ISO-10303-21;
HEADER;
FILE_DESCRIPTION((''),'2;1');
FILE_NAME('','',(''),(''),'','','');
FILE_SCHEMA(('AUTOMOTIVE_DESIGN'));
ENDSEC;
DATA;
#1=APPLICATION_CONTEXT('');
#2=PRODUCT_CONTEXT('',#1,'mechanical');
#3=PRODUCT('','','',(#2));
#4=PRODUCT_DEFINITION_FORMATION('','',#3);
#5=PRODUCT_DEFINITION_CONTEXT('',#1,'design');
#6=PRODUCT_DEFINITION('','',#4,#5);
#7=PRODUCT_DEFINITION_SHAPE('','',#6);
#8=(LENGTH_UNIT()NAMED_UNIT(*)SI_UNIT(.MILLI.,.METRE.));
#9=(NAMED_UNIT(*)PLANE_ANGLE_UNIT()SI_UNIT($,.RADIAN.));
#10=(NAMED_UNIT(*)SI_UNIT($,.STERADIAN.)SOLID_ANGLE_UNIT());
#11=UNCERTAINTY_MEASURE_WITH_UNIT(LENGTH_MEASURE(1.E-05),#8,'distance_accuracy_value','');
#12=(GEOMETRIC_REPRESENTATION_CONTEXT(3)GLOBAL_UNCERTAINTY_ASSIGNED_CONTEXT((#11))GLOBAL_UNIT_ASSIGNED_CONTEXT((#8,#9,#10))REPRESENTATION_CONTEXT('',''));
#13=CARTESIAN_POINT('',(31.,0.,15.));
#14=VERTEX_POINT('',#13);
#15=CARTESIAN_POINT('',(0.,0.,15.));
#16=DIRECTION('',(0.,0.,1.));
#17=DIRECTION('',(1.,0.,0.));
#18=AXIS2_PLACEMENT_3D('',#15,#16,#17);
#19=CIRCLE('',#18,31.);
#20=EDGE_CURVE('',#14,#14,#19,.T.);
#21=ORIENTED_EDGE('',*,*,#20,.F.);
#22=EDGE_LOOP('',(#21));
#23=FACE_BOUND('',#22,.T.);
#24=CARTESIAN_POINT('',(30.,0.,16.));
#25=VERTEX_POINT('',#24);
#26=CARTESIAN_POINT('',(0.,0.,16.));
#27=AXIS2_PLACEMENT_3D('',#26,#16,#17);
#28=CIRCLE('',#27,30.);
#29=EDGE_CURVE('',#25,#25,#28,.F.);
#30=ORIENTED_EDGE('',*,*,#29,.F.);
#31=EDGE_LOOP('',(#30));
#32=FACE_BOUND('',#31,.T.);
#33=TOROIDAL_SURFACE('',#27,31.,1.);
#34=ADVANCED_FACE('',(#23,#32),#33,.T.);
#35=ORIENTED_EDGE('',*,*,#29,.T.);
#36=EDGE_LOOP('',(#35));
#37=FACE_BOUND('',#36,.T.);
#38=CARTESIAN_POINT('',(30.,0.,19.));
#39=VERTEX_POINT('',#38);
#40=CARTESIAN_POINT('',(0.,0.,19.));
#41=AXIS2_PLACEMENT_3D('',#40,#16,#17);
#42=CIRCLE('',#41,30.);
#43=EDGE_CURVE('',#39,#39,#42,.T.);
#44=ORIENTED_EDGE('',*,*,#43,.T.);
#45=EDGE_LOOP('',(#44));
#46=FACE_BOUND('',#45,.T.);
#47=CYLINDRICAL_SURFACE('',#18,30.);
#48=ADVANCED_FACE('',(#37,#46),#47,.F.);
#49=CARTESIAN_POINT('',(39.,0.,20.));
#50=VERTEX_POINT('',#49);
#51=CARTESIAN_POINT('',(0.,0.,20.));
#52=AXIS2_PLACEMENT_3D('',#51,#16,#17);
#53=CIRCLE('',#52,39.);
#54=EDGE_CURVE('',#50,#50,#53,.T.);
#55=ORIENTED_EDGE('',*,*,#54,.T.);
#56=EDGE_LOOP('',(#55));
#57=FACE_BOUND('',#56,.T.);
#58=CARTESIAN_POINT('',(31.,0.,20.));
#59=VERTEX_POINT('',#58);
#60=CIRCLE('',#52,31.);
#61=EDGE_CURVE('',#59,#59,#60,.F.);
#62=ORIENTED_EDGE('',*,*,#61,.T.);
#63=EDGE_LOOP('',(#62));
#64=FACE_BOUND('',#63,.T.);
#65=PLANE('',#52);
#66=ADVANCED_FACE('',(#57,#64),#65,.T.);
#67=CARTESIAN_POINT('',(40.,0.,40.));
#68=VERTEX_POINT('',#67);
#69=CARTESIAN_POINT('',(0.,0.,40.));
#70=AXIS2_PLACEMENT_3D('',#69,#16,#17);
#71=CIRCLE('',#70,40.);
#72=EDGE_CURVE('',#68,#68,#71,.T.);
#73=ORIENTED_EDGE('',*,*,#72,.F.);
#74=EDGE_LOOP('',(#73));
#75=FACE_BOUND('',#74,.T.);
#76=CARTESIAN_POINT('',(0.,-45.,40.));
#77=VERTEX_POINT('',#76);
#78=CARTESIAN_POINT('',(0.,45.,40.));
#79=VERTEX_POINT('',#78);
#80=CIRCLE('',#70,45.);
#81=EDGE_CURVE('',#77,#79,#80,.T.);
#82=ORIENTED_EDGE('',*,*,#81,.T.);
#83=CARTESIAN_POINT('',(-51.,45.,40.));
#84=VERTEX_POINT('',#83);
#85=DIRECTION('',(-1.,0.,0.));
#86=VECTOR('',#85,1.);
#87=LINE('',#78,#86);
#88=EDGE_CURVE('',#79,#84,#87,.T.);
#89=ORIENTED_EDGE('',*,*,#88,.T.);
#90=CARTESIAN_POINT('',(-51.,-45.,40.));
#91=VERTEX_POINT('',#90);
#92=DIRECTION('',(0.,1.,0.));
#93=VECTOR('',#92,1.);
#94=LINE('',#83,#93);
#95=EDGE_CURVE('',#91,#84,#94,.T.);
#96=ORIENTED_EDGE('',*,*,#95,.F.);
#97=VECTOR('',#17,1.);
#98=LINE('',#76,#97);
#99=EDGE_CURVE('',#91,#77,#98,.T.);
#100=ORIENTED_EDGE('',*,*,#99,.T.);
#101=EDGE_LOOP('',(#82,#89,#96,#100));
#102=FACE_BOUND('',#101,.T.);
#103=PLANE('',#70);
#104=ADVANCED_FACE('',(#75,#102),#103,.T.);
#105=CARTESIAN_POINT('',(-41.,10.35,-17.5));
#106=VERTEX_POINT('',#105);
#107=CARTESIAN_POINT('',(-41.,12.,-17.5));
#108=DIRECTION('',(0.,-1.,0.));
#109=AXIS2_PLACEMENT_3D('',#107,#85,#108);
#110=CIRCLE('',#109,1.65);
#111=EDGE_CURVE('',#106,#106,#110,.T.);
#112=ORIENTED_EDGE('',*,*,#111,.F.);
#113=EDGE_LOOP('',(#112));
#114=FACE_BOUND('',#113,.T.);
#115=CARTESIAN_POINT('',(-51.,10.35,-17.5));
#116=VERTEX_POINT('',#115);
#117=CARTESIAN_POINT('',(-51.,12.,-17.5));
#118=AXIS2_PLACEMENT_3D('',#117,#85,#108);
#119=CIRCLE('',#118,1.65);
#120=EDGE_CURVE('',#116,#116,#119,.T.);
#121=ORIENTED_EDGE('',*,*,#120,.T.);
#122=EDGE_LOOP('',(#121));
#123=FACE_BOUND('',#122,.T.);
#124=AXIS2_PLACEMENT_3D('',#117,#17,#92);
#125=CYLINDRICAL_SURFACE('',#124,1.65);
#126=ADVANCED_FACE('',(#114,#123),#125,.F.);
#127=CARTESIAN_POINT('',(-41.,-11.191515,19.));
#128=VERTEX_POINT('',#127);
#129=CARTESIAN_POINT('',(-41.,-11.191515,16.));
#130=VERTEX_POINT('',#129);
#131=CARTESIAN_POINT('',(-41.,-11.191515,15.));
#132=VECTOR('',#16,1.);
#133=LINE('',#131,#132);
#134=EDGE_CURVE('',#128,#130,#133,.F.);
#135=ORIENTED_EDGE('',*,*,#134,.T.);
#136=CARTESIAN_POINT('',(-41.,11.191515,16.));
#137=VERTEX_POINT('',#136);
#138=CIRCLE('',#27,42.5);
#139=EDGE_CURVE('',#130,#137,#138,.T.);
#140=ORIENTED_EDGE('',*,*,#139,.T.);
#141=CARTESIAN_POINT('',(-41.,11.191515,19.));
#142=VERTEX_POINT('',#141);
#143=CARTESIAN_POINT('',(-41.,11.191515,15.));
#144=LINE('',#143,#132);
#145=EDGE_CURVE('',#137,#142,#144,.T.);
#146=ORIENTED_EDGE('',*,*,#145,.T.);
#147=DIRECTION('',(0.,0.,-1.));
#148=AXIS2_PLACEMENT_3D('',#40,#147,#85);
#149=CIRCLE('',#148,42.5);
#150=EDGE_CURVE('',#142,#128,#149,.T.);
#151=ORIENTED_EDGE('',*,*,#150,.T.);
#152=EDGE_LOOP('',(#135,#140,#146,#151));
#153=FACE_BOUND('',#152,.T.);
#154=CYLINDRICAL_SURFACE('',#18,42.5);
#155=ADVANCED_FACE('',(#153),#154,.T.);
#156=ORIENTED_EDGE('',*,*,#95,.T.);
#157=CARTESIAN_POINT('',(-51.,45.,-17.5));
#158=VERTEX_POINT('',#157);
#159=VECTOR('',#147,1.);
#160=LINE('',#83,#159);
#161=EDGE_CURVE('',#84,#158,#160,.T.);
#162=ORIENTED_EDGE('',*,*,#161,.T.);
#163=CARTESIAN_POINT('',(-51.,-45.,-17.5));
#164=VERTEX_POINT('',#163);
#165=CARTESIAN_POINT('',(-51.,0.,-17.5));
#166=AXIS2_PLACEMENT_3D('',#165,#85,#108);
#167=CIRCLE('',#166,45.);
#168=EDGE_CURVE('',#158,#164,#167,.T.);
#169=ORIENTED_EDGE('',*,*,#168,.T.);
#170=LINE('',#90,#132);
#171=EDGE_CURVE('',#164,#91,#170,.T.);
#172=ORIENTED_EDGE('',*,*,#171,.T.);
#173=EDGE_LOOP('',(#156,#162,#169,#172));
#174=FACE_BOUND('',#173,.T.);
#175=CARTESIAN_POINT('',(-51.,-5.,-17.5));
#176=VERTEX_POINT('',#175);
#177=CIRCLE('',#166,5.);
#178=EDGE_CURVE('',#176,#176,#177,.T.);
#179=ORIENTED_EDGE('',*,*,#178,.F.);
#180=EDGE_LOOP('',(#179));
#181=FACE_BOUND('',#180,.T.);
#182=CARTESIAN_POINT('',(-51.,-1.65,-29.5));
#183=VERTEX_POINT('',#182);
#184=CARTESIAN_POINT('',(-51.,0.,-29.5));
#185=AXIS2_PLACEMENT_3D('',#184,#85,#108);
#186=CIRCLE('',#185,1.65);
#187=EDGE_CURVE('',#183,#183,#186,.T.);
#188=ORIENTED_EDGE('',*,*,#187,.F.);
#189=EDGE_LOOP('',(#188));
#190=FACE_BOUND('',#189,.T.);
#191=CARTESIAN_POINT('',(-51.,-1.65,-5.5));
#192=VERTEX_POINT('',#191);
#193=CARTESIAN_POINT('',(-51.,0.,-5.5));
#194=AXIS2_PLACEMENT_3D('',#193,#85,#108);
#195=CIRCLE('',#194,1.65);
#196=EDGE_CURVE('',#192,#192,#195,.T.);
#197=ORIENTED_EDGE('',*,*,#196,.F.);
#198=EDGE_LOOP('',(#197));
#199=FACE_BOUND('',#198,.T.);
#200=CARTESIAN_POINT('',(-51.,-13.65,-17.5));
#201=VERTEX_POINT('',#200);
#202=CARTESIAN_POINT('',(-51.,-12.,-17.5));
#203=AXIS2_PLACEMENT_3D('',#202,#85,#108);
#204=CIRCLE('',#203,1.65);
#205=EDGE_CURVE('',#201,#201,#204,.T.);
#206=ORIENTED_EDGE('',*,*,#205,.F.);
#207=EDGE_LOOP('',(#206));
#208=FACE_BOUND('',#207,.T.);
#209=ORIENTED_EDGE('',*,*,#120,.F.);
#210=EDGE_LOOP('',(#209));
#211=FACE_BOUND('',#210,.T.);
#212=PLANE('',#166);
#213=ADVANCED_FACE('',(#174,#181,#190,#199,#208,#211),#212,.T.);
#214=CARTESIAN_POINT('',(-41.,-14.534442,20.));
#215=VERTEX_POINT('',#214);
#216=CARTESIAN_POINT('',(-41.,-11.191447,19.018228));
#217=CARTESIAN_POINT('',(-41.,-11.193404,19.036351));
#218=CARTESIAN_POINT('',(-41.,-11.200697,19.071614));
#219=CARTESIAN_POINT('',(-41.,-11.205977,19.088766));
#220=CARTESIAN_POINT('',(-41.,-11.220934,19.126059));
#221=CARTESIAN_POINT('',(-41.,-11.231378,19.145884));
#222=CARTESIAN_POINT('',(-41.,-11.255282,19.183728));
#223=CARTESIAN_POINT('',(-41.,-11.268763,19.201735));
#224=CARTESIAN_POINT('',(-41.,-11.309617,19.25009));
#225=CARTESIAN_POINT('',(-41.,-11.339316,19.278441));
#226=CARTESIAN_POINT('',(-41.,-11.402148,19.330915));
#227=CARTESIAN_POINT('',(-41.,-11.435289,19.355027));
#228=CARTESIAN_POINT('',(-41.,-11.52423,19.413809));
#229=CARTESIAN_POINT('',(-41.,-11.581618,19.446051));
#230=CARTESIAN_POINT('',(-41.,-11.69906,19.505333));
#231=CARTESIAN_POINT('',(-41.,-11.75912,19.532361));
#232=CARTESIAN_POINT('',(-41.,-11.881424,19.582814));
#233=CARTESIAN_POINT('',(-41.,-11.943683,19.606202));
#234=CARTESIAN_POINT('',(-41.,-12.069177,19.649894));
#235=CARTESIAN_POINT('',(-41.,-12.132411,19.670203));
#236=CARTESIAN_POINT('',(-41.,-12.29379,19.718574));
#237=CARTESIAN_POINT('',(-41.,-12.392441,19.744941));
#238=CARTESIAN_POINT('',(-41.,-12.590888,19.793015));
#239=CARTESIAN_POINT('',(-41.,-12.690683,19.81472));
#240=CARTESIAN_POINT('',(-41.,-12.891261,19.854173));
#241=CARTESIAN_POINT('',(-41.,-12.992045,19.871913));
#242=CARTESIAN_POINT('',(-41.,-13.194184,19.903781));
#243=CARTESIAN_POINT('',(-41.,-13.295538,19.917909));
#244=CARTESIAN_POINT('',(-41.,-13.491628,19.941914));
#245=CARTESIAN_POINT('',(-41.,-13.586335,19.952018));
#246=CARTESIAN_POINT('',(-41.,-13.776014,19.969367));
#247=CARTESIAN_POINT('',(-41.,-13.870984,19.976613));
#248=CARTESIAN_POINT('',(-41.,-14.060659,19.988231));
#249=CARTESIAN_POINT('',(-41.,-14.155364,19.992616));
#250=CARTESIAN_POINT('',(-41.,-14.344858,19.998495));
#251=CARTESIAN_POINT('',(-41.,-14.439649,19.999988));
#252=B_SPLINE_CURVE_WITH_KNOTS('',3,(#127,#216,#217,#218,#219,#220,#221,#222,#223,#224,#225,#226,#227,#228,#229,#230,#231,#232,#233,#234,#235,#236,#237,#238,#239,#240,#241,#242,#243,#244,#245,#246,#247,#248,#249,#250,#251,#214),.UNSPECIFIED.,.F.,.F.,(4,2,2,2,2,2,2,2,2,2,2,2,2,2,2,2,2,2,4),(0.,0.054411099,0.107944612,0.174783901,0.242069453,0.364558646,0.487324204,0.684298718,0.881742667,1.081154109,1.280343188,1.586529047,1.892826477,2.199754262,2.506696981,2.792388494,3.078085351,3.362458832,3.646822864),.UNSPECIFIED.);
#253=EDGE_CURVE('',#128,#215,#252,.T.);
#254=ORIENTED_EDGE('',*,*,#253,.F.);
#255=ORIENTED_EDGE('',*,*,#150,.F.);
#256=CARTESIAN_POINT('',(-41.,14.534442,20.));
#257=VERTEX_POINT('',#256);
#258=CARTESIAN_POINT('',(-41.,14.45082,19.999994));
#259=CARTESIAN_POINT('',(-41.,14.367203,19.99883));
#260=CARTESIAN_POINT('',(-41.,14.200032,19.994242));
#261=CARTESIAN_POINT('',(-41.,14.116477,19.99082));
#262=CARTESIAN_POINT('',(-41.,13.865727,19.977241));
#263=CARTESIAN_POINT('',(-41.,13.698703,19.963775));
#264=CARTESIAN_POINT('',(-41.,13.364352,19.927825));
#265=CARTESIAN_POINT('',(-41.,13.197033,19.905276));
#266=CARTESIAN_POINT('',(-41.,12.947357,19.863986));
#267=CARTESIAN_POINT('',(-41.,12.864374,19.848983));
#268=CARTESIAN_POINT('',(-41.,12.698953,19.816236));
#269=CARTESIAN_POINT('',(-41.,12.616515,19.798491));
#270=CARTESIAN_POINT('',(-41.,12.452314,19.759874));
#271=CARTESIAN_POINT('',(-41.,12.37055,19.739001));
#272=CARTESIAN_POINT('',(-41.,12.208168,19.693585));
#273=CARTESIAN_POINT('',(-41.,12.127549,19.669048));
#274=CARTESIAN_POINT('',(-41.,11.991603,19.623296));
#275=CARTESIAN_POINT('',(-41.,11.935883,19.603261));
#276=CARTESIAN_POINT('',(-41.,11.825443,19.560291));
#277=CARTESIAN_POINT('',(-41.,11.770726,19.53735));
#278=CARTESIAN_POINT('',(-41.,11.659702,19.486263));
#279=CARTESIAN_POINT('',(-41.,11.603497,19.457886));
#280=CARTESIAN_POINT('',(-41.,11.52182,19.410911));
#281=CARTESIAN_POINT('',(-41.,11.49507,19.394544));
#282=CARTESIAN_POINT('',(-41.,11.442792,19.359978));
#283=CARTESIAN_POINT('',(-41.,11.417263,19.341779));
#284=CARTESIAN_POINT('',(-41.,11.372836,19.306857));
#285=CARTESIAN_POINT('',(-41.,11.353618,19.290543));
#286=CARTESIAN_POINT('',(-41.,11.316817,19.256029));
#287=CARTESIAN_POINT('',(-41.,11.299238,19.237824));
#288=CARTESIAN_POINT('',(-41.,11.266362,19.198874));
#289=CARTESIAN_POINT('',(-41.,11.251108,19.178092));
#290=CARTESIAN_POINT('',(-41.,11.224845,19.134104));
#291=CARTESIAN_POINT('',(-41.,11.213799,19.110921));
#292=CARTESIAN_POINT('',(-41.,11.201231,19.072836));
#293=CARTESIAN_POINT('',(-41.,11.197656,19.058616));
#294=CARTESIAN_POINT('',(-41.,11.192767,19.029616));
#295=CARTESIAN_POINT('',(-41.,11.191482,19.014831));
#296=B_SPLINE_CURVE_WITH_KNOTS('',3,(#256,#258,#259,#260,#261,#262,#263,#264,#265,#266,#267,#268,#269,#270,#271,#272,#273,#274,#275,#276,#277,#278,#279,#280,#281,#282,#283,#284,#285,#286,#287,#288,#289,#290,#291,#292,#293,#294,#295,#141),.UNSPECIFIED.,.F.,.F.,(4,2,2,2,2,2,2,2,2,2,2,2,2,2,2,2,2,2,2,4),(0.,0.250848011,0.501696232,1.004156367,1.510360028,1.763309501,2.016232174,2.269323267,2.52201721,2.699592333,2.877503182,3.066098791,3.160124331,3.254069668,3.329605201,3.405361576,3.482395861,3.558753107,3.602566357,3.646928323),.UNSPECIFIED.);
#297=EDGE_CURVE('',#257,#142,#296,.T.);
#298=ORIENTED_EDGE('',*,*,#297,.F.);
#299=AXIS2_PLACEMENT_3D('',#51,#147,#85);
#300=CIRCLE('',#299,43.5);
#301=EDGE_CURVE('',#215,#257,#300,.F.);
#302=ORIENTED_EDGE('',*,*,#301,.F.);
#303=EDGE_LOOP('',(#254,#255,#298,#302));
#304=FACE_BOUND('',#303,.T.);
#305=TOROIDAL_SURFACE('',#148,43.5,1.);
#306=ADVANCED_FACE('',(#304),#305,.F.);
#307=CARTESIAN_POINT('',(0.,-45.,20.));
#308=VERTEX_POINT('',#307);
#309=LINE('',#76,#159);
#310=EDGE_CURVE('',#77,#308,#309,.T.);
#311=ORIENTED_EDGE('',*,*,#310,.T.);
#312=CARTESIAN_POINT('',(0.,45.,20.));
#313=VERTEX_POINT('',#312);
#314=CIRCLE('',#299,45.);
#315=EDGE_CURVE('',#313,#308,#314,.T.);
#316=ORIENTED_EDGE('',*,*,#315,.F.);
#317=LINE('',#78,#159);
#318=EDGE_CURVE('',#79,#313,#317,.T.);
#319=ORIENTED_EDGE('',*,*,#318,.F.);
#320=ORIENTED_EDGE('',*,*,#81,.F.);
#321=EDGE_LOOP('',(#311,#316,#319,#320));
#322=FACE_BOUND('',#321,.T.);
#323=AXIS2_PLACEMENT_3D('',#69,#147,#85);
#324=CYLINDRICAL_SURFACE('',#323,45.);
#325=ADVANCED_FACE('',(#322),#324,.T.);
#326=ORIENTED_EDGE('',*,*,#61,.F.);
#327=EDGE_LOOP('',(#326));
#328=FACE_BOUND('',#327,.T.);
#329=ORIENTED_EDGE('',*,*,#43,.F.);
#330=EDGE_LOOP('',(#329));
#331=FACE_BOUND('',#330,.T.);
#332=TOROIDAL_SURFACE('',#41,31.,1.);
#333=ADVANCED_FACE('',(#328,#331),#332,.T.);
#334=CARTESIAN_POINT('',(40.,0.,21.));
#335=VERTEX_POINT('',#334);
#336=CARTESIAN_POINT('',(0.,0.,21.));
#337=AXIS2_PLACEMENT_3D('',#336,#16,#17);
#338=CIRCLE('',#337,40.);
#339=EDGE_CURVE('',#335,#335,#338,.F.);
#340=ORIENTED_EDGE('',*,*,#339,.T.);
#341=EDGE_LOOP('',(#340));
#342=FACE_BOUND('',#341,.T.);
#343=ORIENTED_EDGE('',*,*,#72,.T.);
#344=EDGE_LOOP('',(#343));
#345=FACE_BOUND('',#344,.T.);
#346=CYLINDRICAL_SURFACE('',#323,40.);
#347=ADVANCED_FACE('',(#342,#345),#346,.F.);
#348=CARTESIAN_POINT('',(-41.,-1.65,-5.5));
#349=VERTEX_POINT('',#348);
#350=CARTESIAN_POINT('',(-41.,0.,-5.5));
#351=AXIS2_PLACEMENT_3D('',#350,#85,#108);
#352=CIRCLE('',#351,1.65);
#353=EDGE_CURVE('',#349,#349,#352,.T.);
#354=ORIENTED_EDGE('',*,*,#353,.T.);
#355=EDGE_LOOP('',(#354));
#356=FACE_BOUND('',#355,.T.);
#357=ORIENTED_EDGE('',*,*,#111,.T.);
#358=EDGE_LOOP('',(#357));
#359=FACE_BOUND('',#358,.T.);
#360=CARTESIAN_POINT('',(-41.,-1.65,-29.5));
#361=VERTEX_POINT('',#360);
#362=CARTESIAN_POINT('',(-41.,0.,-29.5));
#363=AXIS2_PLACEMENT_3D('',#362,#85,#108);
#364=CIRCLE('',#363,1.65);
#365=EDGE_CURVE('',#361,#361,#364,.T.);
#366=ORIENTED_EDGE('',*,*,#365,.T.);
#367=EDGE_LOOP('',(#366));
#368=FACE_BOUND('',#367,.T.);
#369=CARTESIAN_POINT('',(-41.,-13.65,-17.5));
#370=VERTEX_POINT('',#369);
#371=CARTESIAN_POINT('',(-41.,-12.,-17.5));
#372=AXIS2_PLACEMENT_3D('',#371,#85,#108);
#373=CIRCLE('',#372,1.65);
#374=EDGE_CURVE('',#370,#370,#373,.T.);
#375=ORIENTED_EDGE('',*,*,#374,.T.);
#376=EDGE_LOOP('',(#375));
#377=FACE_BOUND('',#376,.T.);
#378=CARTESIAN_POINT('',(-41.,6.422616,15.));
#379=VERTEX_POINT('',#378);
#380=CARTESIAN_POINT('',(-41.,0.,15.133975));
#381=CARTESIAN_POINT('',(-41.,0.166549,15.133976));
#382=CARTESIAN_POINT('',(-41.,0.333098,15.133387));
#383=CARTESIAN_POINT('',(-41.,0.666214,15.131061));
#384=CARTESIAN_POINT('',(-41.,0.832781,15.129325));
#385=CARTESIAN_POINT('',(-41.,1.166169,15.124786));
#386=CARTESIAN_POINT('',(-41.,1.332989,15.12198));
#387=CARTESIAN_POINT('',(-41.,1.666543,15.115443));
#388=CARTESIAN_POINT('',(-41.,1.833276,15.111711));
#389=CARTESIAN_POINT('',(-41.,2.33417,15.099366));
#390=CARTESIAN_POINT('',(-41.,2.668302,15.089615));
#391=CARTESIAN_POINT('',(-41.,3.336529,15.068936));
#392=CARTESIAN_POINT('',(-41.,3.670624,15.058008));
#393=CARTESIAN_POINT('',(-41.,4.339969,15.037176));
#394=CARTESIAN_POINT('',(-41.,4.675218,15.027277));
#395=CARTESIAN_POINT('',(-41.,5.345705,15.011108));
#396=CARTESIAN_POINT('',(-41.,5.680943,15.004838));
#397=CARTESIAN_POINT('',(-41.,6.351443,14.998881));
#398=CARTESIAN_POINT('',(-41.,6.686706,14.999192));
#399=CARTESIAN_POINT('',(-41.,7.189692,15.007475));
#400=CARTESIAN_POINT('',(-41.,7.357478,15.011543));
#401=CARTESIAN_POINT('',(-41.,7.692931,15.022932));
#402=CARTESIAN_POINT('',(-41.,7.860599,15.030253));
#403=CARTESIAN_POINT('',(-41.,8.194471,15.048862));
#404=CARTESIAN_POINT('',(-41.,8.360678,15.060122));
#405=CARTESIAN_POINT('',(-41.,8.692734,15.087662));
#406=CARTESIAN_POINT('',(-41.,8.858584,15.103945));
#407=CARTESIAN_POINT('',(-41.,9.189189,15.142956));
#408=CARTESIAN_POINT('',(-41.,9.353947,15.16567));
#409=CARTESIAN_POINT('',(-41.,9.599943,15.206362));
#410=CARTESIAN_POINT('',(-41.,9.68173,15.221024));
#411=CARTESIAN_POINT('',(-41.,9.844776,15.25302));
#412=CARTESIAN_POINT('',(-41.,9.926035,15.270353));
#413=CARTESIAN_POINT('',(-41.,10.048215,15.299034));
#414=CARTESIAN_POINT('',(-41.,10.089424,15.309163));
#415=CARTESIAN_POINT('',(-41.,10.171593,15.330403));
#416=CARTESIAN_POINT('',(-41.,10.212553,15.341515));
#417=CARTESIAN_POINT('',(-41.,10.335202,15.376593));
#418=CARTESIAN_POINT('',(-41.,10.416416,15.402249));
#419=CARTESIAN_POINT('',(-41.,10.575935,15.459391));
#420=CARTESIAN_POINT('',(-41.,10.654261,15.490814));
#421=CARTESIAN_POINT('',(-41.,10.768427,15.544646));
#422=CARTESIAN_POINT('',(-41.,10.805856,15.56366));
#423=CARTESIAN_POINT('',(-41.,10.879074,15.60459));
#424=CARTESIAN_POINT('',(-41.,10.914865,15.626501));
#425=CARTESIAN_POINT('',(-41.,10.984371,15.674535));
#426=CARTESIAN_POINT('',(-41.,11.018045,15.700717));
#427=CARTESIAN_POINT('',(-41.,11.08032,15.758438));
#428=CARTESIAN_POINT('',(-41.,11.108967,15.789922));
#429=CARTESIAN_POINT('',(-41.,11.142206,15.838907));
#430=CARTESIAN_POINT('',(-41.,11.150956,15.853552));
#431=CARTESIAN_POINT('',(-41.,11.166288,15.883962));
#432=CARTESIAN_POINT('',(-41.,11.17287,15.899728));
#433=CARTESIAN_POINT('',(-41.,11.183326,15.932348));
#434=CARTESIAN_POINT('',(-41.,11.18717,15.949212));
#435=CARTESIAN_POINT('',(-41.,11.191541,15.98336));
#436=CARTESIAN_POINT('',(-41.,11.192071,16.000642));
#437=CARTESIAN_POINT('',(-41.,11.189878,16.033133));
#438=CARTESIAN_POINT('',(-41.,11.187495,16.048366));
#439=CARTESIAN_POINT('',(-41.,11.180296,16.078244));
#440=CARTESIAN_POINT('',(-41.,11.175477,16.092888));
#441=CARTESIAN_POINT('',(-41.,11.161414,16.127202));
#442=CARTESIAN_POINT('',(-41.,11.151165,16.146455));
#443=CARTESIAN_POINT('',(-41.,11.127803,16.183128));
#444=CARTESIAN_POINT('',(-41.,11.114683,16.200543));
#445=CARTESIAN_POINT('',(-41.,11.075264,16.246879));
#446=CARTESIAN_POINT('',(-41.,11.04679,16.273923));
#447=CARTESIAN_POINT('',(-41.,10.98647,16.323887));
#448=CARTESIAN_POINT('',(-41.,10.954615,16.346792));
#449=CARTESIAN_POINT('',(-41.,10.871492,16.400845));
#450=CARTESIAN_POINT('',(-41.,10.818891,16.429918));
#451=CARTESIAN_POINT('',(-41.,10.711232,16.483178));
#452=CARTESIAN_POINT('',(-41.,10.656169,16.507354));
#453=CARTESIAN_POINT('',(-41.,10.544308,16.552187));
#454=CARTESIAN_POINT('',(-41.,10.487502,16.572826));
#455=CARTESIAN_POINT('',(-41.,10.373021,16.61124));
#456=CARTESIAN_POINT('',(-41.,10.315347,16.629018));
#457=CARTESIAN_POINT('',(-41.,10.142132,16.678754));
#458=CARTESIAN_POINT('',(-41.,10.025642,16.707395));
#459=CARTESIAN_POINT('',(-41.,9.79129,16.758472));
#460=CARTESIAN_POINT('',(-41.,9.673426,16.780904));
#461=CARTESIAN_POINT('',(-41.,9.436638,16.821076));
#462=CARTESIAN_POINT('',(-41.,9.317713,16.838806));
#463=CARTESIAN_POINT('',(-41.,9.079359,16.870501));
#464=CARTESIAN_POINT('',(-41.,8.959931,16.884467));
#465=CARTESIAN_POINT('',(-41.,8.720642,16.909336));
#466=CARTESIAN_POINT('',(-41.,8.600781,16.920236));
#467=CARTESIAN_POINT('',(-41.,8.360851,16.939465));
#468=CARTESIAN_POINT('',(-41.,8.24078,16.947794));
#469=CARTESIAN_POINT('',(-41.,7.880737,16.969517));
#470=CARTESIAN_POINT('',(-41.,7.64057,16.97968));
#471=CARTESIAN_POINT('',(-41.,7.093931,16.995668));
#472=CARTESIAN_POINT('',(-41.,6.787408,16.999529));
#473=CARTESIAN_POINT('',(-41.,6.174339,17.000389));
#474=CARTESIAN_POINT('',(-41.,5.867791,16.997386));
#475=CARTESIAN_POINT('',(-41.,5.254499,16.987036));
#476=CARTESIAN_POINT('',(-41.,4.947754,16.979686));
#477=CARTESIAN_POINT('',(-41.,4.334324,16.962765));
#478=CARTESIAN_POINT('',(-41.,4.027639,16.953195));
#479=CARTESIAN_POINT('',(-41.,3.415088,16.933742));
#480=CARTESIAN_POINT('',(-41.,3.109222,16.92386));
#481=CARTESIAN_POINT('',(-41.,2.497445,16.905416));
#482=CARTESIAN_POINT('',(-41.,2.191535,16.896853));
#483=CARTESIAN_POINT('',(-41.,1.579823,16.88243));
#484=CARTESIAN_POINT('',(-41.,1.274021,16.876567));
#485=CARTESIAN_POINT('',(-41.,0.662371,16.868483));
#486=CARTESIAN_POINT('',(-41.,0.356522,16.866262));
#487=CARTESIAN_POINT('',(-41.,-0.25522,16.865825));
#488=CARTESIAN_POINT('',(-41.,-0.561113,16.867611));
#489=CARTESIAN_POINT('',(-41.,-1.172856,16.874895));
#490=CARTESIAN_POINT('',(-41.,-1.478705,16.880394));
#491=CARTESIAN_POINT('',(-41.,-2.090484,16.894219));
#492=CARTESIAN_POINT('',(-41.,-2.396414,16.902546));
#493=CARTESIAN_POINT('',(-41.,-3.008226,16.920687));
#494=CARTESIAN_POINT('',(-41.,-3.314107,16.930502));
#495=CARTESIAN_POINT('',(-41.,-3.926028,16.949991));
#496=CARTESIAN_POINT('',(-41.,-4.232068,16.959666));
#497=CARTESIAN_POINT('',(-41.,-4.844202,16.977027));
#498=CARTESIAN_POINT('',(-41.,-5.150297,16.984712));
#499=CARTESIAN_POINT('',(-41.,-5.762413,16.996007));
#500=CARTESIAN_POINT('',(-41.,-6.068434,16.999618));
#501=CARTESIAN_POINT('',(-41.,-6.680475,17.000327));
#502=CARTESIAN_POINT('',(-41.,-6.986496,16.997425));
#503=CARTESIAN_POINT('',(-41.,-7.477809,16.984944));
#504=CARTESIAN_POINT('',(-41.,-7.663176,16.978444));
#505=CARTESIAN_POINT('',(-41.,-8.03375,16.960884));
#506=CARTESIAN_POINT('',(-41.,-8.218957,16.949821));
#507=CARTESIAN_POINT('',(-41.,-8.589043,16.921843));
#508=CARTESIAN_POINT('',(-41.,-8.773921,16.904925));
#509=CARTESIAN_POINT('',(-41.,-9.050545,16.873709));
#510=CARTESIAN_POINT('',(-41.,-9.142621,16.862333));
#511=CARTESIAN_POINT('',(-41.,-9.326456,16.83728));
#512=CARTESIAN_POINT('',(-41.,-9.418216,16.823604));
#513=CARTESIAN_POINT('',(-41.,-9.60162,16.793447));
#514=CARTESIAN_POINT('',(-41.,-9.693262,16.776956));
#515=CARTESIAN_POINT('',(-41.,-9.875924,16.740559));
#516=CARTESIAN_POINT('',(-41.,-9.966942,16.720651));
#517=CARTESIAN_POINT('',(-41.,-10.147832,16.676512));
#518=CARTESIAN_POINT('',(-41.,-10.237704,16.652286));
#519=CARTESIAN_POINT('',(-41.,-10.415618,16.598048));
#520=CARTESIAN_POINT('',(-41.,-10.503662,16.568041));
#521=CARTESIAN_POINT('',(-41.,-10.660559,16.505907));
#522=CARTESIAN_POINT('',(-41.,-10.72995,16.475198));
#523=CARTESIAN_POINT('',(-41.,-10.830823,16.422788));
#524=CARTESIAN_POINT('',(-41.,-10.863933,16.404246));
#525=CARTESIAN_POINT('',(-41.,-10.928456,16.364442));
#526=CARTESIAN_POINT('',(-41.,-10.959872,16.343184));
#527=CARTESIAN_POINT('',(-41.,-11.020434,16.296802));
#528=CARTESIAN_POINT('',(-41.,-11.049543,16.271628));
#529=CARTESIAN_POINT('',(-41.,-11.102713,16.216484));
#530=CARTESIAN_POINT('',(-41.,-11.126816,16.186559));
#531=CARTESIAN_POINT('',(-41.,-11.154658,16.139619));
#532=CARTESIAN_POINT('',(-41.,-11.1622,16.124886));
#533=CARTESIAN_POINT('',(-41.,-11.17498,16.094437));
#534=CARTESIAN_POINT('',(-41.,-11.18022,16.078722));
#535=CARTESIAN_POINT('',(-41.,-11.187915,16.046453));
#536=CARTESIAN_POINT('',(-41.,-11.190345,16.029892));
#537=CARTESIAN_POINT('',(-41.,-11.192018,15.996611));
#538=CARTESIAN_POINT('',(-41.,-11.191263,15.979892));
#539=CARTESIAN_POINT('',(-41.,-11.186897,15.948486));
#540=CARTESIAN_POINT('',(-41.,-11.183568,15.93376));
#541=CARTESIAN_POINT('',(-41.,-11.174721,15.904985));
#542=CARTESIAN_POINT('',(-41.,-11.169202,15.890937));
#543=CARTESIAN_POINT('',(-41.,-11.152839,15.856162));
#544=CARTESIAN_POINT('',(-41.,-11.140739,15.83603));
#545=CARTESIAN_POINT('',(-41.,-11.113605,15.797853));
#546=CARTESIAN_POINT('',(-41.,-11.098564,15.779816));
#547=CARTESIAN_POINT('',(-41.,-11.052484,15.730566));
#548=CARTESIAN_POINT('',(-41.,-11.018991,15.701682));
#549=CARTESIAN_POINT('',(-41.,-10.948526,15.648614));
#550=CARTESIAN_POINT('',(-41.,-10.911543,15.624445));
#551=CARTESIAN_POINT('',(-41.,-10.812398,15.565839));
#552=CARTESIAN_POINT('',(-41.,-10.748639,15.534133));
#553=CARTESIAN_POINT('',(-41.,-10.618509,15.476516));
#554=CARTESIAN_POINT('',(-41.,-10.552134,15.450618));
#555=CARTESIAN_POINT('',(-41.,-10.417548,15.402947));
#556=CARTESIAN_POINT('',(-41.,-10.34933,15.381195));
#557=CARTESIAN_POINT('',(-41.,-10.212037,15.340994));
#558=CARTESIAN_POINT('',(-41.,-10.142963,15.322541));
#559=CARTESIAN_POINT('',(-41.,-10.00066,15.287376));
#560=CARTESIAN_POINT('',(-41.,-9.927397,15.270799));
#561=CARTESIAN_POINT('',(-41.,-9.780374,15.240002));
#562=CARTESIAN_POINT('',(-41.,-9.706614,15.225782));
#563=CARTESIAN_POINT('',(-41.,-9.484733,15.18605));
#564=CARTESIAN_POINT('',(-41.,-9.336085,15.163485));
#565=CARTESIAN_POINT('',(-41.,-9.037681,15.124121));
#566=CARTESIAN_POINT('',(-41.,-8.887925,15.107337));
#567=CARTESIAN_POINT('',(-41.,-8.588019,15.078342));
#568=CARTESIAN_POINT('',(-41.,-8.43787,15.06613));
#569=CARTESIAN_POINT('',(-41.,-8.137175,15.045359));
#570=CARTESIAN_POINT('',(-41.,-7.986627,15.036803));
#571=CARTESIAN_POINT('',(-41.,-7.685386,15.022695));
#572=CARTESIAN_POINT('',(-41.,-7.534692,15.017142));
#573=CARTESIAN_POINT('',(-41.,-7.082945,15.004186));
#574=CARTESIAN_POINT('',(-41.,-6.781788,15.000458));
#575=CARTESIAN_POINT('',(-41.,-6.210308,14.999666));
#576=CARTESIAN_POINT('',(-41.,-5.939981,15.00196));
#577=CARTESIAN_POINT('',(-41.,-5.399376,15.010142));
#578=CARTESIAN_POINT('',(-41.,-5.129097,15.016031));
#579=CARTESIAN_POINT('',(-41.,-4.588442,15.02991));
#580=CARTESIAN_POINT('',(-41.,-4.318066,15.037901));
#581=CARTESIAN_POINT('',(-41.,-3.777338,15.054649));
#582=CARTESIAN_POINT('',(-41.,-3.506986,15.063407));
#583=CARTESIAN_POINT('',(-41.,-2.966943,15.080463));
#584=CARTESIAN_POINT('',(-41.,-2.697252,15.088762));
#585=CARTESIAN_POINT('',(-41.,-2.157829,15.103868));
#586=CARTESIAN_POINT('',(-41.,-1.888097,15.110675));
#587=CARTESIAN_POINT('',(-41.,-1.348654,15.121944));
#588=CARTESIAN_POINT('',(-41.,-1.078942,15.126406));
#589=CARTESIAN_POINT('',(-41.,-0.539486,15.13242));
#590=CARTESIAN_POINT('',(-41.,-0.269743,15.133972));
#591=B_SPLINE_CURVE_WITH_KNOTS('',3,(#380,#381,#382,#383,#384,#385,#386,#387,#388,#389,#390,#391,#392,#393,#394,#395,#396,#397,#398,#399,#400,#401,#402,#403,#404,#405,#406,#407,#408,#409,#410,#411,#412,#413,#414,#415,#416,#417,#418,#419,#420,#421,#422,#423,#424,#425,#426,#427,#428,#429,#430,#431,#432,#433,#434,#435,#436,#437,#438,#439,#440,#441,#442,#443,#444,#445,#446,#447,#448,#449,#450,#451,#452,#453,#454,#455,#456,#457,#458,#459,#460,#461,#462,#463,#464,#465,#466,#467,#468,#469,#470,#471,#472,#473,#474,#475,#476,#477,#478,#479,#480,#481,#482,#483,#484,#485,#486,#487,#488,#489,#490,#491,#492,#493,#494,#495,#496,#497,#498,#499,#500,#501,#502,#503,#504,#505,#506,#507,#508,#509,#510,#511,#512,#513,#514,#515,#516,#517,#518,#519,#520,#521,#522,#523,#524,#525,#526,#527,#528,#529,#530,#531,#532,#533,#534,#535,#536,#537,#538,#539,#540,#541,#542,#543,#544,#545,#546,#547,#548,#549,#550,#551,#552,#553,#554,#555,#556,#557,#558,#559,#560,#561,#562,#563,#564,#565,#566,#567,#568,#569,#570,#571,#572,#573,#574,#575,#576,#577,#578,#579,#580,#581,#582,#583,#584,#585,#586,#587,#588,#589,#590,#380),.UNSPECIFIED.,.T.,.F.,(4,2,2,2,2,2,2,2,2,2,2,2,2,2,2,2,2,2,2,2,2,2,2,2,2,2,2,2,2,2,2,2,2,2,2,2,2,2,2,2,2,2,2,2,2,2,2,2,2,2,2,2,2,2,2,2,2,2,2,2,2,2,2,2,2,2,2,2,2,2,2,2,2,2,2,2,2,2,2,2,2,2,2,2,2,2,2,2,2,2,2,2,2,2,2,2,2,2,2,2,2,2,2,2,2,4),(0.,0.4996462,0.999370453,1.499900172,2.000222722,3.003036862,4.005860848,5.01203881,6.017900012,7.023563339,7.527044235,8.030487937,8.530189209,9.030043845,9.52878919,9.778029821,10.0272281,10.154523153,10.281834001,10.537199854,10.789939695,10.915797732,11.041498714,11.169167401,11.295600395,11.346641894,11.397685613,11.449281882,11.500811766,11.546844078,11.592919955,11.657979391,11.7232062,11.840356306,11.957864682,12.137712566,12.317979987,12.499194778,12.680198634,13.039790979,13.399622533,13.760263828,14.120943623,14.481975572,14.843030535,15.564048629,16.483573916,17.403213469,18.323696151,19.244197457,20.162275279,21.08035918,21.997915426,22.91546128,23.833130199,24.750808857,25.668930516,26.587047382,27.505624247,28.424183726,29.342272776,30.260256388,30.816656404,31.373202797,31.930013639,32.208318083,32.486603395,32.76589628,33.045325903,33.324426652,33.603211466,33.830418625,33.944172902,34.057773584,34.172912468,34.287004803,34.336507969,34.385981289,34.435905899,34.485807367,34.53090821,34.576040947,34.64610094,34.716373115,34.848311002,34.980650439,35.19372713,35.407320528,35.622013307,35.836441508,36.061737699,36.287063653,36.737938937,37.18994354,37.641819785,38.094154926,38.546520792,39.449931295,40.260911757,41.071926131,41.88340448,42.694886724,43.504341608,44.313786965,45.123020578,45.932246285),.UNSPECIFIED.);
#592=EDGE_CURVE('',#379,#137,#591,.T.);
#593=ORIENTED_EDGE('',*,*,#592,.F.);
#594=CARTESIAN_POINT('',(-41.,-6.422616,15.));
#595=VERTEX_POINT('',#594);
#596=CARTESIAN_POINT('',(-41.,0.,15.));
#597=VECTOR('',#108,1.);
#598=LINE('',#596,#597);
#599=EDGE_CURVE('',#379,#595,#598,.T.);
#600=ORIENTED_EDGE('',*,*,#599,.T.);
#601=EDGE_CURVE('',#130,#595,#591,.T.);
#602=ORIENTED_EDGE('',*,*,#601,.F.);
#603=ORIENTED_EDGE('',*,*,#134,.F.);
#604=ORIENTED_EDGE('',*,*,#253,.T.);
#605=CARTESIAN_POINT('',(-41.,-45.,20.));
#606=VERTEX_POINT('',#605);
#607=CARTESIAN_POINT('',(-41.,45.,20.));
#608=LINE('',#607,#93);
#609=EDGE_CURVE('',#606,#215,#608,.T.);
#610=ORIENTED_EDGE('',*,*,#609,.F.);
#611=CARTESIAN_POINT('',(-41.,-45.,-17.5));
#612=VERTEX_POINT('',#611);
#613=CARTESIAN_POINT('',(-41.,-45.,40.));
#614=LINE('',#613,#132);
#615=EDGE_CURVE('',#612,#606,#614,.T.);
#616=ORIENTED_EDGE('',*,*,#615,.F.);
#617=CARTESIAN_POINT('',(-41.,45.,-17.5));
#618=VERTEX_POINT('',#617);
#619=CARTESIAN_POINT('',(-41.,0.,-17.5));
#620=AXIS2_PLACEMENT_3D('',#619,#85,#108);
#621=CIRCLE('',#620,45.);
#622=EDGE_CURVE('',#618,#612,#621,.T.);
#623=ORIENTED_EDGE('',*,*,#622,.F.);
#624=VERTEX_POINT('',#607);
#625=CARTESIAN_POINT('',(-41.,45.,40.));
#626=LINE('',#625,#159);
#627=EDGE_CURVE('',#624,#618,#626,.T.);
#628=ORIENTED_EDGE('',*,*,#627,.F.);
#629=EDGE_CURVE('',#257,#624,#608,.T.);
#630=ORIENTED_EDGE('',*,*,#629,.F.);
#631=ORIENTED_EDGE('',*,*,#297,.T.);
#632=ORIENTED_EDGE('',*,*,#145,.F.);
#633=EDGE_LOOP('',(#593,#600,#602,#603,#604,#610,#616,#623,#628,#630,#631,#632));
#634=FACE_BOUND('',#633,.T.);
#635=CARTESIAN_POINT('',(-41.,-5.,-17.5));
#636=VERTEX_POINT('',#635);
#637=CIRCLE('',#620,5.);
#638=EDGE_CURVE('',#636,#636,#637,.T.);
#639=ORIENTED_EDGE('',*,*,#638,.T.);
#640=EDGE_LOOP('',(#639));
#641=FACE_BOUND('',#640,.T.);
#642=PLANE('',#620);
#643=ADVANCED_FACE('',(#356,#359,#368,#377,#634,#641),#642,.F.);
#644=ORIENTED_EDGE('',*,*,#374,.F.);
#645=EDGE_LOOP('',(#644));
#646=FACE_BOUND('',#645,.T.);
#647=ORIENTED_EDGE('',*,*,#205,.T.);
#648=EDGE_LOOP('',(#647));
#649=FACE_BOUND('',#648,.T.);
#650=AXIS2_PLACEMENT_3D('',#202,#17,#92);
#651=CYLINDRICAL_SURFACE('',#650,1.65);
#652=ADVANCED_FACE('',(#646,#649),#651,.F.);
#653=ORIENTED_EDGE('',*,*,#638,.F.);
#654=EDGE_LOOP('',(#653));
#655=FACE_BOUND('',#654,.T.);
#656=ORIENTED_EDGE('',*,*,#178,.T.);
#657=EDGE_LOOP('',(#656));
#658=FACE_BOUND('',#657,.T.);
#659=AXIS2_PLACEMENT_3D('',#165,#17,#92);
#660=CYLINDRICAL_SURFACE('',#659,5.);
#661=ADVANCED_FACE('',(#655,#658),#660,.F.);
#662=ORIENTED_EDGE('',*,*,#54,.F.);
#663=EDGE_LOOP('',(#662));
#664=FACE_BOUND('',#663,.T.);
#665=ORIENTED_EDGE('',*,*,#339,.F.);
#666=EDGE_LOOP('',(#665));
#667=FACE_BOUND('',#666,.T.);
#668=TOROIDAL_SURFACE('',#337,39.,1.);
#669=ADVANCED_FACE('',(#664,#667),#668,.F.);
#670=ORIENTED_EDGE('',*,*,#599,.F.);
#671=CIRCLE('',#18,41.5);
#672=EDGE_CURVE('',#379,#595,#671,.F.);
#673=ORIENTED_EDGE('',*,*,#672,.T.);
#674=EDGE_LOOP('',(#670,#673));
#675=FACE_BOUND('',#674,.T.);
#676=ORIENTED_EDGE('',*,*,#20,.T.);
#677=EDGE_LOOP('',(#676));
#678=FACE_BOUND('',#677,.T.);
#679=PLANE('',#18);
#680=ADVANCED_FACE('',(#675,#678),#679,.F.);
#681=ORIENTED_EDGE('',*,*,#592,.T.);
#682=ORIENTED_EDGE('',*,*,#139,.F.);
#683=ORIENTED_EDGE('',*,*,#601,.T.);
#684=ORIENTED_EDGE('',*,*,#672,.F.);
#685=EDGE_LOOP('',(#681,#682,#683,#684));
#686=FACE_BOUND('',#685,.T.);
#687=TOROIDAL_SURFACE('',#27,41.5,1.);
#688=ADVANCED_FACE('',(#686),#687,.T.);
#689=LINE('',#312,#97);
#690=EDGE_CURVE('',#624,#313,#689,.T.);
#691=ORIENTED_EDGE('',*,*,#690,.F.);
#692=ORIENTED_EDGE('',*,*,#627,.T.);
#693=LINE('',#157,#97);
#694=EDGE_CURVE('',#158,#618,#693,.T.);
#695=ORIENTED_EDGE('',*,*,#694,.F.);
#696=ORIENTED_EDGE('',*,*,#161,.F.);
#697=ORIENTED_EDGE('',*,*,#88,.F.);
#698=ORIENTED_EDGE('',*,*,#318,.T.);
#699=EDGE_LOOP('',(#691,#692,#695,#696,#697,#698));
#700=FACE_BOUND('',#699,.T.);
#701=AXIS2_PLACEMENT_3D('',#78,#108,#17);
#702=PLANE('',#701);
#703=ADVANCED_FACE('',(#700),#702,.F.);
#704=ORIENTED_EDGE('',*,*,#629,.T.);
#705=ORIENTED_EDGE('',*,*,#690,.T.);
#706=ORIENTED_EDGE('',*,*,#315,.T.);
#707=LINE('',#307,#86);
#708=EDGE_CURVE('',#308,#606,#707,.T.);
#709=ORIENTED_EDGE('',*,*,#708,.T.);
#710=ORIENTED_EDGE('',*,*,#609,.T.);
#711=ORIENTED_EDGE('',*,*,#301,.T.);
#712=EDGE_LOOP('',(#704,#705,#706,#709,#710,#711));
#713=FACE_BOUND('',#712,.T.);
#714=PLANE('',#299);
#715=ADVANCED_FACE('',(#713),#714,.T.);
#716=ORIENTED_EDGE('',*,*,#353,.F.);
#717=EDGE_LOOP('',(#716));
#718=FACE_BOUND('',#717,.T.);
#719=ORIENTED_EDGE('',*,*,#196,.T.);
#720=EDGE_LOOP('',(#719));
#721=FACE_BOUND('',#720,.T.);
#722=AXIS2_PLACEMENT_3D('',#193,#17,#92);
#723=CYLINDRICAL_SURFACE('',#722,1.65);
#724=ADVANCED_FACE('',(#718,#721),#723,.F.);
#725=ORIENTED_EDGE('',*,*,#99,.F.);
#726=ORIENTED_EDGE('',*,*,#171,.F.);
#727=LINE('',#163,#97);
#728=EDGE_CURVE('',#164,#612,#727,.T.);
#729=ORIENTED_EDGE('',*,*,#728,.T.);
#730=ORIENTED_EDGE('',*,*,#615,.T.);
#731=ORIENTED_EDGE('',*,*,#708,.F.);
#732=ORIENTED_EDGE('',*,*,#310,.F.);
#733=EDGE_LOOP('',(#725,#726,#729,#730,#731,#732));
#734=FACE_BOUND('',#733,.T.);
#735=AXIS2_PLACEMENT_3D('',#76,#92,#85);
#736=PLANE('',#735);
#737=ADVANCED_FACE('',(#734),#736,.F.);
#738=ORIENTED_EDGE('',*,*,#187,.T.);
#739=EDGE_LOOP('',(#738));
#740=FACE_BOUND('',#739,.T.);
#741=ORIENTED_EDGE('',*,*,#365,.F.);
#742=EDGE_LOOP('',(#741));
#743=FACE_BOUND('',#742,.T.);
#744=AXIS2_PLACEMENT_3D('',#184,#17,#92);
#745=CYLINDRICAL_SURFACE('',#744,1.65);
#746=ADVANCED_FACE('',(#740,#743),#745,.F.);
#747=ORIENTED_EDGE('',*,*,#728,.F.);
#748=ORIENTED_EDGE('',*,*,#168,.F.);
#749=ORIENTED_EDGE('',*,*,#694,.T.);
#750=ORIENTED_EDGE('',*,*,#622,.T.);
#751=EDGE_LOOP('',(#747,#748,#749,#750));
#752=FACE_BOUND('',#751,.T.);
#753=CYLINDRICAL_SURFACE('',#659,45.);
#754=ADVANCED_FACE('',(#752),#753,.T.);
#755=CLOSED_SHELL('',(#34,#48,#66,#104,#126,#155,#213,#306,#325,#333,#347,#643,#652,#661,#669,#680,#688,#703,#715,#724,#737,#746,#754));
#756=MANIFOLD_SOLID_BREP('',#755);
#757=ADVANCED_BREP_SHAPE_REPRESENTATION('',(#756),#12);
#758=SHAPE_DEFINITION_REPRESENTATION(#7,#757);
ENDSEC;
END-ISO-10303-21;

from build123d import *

# Parameters (mm, degrees)
SKETCH1_R           = 40
BOSS_EXTRUDE1_DEPTH = 40
SKETCH6_R           = 99.675751491
CUT_EXTRUDE3_DEPTH  = 20
SKETCH7_R           = 42.5
SKETCH7_R_2         = 30
BOSS_EXTRUDE4_DEPTH = 5
FILLET1_R           = 1
SKETCH8_R           = 1.65
SKETCH8_R_2         = 5
BOSS_EXTRUDE5_DEPTH = 10


with BuildPart() as part:
    # Sketch1 → Boss-Extrude1 (new body)
    with BuildSketch(Plane.XY):
        with BuildLine():
            Line((0, 45), (-41, 45))
            Line((-41, 45), (-41, -45))
            Line((-41, -45), (0, -45))
            ThreePointArc((0, -45), (45, 0), (0, 45))
        make_face()
        Circle(SKETCH1_R, mode=Mode.SUBTRACT)
    extrude(amount=BOSS_EXTRUDE1_DEPTH)

    # Sketch6 → Cut-Extrude3 (cut, symmetric)
    with BuildSketch(Plane(origin=(0, 0, 0), x_dir=(-1, 0, 0), z_dir=(0, 0, -1))):
        Circle(SKETCH6_R)
    extrude(amount=CUT_EXTRUDE3_DEPTH, both=True, mode=Mode.SUBTRACT)

    # Sketch7 → Boss-Extrude4 (add)
    with BuildSketch(Plane.XY.offset(20)):
        Circle(SKETCH7_R)
        Circle(SKETCH7_R_2, mode=Mode.SUBTRACT)
    extrude(amount=-BOSS_EXTRUDE4_DEPTH)

    # Fillet1
    # the kernel refuses this fillet: 1 mm, written as the material it adds along each edge
    with BuildSketch(Plane(origin=(0, 0, 20), x_dir=(1, 0, 0), z_dir=(0, -1, 0))) as fillet1_piece_1_section:
        with BuildLine():
            CenterArc((42.5 + FILLET1_R, -FILLET1_R), FILLET1_R, 90, 90)
            Line((42.5, -FILLET1_R), (42.5, 0))
            Line((42.5, 0), (42.5 + FILLET1_R, 0))
        make_face()
    fillet1_piece_1 = revolve(axis=Axis((0, 0, 20), (0, 0, 1)), revolution_arc=168.107148561, mode=Mode.PRIVATE)
    fillet1_piece_1 = split(fillet1_piece_1, bisect_by=Plane(origin=(-41, 42.392814896, 19.72810619), z_dir=(1, 0, 0)), keep=Keep.TOP, mode=Mode.PRIVATE)
    add(fillet1_piece_1)
    with BuildSketch(Plane(origin=(0, 0, 20), x_dir=(1, 0, 0), z_dir=(0, 1, 0))) as fillet1_piece_2:
        with BuildLine():
            CenterArc((40 - FILLET1_R, -FILLET1_R), FILLET1_R, 0, 90)
            Line((40 - FILLET1_R, 0), (40, 0))
            Line((40, 0), (40, -FILLET1_R))
        make_face()
    revolve(axis=Axis((0, 0, 20), (0, 0, -1)))
    with BuildSketch(Plane(origin=(0, 0, 20), x_dir=(-0.9785347047429207, -0.20608209920729434, 0), z_dir=(-0.20608209920729434, 0.9785347047429207, 0))) as fillet1_piece_3_section:
        with BuildLine():
            CenterArc((42.5 + FILLET1_R, -FILLET1_R), FILLET1_R, 90, 90)
            Line((42.5, -FILLET1_R), (42.5, 0))
            Line((42.5, 0), (42.5 + FILLET1_R, 0))
        make_face()
    fillet1_piece_3 = revolve(axis=Axis((0, 0, 20), (0, 0, 1)), revolution_arc=168.107148561, mode=Mode.PRIVATE)
    fillet1_piece_3 = split(fillet1_piece_3, bisect_by=Plane(origin=(-41, -42.392814308, 19.728106783), z_dir=(1, 0, 0)), keep=Keep.TOP, mode=Mode.PRIVATE)
    add(fillet1_piece_3)
    # the kernel refuses this fillet: 1 mm, written as the material it takes off along each edge
    with BuildSketch(Plane(origin=(0, 0, 15), x_dir=(1, 0, 0), z_dir=(0, -1, 0))) as fillet1_2_piece_1:
        with BuildLine():
            CenterArc((42.5 - FILLET1_R, FILLET1_R), FILLET1_R, 270, 90)
            Line((42.5, FILLET1_R), (42.5, 0))
            Line((42.5, 0), (42.5 - FILLET1_R, 0))
        make_face()
    revolve(axis=Axis((0, 0, 15), (0, 0, 1)), mode=Mode.SUBTRACT)
    with BuildSketch(Plane(origin=(0, 0, 15), x_dir=(1, 0, 0), z_dir=(0, -1, 0))) as fillet1_2_piece_2:
        with BuildLine():
            CenterArc((30 + FILLET1_R, FILLET1_R), FILLET1_R, 180, 90)
            Line((30 + FILLET1_R, 0), (30, 0))
            Line((30, 0), (30, FILLET1_R))
        make_face()
    revolve(axis=Axis((0, 0, 15), (0, 0, 1)), mode=Mode.SUBTRACT)
    with BuildSketch(Plane(origin=(0, 0, 20), x_dir=(1, 0, 0), z_dir=(0, -1, 0))) as fillet1_2_piece_3:
        with BuildLine():
            CenterArc((30 + FILLET1_R, -FILLET1_R), FILLET1_R, 90, 90)
            Line((30, -FILLET1_R), (30, 0))
            Line((30, 0), (30 + FILLET1_R, 0))
        make_face()
    revolve(axis=Axis((0, 0, 20), (0, 0, 1)), mode=Mode.SUBTRACT)

    # Sketch8 → Boss-Extrude5 (add)
    with BuildSketch(Plane.ZY.offset(41)):
        with BuildLine():
            Line((40, 45), (40, -45))
            Line((40, -45), (-17.5, -45))
            ThreePointArc((-17.5, -45), (-62.5, 0), (-17.5, 45))
            Line((-17.5, 45), (40, 45))
        make_face()
        with Locations(Location((-17.5, 12, 0), (0, 0, 270))):
            Circle(SKETCH8_R, mode=Mode.SUBTRACT)
        with Locations(Location((-17.5, 0, 0), (0, 0, 270))):
            Circle(SKETCH8_R_2, mode=Mode.SUBTRACT)
        with Locations(Location((-5.5, 0, 0), (0, 0, 270))):
            Circle(SKETCH8_R, mode=Mode.SUBTRACT)
        with Locations(Location((-17.5, -12, 0), (0, 0, 270))):
            Circle(SKETCH8_R, mode=Mode.SUBTRACT)
        with Locations(Location((-29.5, 0, 0), (0, 0, 270))):
            Circle(SKETCH8_R, mode=Mode.SUBTRACT)
    extrude(amount=BOSS_EXTRUDE5_DEPTH)


solid = part.part
